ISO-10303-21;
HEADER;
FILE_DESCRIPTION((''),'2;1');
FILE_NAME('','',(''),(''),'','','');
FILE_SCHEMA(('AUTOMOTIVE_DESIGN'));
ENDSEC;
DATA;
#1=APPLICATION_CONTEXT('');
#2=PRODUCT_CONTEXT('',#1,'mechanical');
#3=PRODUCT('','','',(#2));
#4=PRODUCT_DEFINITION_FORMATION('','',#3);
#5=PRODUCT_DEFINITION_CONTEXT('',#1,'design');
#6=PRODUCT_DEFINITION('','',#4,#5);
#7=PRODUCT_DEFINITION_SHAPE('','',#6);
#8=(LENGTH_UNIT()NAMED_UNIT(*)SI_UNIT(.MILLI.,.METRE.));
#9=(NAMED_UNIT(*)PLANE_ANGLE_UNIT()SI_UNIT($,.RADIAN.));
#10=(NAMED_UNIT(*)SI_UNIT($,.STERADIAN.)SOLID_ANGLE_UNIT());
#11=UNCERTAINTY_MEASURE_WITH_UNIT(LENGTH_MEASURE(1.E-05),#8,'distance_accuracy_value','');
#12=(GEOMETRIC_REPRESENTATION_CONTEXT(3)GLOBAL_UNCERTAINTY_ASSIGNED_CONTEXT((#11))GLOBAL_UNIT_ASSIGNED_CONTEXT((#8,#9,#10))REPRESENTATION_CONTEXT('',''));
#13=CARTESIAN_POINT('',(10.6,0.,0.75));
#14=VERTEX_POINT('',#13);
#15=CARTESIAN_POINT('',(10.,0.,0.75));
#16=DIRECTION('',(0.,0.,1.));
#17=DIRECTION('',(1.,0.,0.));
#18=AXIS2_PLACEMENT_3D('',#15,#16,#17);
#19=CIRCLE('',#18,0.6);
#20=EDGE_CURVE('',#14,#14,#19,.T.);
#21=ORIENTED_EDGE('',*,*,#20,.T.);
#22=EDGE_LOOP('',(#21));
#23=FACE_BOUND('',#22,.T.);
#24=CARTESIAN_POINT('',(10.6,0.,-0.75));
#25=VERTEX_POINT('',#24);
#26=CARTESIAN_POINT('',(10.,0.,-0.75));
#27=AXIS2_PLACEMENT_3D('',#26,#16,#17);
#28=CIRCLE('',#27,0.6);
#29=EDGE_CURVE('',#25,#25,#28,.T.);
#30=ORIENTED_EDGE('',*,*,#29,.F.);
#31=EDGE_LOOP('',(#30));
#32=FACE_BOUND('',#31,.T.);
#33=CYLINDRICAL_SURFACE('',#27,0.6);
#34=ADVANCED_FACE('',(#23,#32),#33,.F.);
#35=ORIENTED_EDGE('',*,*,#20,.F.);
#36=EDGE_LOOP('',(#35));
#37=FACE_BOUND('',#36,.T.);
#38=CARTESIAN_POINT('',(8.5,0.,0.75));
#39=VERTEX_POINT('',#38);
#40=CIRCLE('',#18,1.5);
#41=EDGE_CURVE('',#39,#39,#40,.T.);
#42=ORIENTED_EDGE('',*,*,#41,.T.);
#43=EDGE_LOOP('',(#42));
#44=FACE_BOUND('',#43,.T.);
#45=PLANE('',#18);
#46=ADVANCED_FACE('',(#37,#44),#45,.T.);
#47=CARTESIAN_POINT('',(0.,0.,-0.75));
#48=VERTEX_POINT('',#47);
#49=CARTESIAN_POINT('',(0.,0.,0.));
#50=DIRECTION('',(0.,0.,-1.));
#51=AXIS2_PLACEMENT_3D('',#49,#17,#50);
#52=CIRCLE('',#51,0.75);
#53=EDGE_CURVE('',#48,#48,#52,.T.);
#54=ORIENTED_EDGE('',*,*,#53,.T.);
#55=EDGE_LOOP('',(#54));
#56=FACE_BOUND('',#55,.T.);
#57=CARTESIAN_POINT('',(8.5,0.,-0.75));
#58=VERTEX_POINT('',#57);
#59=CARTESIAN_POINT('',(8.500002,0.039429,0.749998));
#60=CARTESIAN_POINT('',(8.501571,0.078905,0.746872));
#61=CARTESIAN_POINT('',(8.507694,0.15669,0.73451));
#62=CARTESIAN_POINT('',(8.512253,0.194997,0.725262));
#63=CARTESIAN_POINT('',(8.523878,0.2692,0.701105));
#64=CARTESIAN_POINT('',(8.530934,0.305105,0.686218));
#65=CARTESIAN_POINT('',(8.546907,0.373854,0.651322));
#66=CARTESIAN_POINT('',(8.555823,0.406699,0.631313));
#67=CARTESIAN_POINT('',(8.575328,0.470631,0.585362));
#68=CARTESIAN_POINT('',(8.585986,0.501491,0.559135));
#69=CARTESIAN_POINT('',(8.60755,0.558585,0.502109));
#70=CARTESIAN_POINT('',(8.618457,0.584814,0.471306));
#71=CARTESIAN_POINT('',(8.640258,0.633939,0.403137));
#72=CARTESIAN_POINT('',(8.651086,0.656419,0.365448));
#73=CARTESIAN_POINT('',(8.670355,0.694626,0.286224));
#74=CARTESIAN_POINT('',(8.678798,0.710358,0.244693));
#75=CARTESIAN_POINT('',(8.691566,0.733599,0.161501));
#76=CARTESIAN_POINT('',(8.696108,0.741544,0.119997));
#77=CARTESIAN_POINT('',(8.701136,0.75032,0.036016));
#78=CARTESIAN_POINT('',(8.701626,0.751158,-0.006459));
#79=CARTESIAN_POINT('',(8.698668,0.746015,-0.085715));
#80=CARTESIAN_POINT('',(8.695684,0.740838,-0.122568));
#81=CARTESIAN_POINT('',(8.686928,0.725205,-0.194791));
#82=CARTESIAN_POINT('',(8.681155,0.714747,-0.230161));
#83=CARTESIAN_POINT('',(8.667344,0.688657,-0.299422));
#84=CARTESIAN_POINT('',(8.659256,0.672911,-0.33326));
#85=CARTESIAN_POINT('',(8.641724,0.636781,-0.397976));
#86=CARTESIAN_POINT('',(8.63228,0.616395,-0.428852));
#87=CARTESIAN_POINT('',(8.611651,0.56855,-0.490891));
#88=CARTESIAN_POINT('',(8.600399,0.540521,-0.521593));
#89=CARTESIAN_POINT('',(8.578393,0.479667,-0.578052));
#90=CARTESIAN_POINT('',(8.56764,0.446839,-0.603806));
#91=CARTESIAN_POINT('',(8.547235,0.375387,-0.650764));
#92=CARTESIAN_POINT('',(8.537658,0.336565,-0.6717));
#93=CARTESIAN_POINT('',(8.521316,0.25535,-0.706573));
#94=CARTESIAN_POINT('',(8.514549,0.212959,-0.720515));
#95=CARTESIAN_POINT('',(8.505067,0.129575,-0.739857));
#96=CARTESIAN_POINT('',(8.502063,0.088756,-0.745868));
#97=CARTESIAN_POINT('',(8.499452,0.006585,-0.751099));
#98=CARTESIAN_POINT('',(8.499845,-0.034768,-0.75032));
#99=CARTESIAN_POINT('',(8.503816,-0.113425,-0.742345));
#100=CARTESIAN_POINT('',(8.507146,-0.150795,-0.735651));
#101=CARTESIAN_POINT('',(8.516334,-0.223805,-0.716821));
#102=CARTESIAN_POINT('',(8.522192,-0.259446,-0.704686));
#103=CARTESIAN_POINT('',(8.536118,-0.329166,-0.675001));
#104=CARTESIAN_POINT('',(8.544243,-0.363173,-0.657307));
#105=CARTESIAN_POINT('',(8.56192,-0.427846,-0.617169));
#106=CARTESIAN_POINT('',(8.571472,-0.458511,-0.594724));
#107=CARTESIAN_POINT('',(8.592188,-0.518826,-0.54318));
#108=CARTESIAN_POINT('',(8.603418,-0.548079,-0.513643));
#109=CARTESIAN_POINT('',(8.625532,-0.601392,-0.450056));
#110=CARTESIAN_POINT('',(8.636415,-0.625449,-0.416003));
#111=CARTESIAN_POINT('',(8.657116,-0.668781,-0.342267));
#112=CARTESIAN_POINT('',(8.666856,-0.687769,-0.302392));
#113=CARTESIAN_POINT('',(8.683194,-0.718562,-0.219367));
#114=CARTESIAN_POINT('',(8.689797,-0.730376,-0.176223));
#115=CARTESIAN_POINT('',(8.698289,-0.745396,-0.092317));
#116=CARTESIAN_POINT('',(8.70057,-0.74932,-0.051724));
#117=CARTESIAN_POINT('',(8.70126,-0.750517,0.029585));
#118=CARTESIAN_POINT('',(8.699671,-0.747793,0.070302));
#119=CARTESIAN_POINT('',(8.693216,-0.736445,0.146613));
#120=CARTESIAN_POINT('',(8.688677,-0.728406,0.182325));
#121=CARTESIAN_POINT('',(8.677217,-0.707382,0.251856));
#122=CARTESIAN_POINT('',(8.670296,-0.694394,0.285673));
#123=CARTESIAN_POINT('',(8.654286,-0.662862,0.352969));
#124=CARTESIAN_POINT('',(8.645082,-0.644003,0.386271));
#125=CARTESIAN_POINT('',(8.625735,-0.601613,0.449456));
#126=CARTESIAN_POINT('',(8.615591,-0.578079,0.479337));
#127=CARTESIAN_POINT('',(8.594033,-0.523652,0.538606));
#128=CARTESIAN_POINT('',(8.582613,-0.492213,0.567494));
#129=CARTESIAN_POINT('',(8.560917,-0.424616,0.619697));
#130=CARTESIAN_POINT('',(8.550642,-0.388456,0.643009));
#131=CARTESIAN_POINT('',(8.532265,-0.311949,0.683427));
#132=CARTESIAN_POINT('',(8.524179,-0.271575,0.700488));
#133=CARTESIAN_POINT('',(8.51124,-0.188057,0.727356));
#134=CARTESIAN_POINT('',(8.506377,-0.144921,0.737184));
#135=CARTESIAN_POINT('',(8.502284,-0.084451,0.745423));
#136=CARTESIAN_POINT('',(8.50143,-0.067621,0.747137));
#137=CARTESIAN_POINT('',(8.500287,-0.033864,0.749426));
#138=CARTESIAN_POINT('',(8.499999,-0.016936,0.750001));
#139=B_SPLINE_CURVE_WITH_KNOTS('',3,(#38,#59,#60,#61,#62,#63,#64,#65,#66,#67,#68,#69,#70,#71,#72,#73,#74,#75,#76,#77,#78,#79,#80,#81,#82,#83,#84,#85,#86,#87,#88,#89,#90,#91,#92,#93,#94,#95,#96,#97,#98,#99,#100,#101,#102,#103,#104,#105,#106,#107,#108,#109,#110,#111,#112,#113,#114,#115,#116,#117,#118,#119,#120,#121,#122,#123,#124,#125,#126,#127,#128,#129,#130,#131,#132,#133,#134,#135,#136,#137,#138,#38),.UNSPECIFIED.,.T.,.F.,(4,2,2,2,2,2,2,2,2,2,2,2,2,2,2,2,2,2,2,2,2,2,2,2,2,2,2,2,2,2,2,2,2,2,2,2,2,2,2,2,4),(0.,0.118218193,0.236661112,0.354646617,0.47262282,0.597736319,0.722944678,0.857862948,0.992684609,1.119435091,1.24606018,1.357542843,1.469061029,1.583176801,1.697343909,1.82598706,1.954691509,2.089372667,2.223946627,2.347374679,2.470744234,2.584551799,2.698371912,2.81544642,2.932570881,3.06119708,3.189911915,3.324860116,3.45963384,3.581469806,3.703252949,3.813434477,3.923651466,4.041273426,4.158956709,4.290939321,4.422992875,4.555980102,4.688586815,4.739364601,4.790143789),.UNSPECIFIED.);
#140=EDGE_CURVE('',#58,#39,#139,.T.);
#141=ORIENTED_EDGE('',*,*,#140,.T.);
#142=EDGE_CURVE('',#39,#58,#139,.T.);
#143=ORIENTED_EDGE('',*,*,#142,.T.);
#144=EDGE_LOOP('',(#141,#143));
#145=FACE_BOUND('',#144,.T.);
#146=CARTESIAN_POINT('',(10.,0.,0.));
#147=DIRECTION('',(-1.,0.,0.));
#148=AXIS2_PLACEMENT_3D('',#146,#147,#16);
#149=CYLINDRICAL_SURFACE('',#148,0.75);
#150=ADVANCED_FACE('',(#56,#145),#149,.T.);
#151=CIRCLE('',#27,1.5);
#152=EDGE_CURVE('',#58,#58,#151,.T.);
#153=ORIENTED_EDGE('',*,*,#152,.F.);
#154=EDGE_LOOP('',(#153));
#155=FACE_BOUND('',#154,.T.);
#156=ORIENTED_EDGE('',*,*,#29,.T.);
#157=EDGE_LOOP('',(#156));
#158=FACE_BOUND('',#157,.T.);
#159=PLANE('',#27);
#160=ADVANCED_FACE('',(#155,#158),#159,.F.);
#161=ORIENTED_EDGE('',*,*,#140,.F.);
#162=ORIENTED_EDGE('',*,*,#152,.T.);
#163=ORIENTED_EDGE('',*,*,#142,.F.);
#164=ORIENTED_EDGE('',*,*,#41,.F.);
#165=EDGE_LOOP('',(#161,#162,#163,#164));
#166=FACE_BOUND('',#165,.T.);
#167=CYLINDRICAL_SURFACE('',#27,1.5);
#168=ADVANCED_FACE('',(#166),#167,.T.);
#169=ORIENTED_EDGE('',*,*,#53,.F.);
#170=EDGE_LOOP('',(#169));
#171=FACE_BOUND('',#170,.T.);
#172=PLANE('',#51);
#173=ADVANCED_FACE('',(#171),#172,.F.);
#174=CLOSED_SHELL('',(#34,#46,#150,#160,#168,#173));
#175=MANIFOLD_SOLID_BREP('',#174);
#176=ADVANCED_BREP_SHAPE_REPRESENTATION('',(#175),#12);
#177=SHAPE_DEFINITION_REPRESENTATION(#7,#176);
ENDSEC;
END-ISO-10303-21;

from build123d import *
from build123d.topology import SkipClean

# Parameters (mm, degrees)
SKETCH1_R                = 0.75
BOSS_EXTRUDE1_DEPTH      = 10
BOSS_EXTRUDE2_DEPTH      = 0.75
BOSS_EXTRUDE2_DEPTH_BACK = 0.75
SKETCH2_R                = 1.5
SKETCH3_R                = 0.6
CUT_EXTRUDE1_DEPTH       = 1.5


with BuildPart() as part:
    # Sketch1 → Boss-Extrude1 (new body)
    with BuildSketch(Plane(origin=(0, 0, 0), x_dir=(0, 0, -1), z_dir=(1, 0, 0))):
        Circle(SKETCH1_R)
    extrude(amount=BOSS_EXTRUDE1_DEPTH)

    # Sketch2 → Boss-Extrude2 (add, two sides: drawn at the far end of the back side and taken through both)
    with SkipClean():  # the faces are left unmerged after this step: merging them gives an invalid solid
        with BuildSketch(Plane.XY.offset(-BOSS_EXTRUDE2_DEPTH_BACK)):
            with Locations((10, 0)):
                Circle(SKETCH2_R)
        extrude(amount=BOSS_EXTRUDE2_DEPTH + BOSS_EXTRUDE2_DEPTH_BACK)

    # Sketch3 → Cut-Extrude1 (cut)
    with SkipClean():  # the faces are left unmerged after this step: merging them gives an invalid solid
        with BuildSketch(Plane.XY.offset(0.75)):
            with Locations((10, 0)):
                Circle(SKETCH3_R)
        extrude(amount=-CUT_EXTRUDE1_DEPTH, mode=Mode.SUBTRACT)


solid = part.part
